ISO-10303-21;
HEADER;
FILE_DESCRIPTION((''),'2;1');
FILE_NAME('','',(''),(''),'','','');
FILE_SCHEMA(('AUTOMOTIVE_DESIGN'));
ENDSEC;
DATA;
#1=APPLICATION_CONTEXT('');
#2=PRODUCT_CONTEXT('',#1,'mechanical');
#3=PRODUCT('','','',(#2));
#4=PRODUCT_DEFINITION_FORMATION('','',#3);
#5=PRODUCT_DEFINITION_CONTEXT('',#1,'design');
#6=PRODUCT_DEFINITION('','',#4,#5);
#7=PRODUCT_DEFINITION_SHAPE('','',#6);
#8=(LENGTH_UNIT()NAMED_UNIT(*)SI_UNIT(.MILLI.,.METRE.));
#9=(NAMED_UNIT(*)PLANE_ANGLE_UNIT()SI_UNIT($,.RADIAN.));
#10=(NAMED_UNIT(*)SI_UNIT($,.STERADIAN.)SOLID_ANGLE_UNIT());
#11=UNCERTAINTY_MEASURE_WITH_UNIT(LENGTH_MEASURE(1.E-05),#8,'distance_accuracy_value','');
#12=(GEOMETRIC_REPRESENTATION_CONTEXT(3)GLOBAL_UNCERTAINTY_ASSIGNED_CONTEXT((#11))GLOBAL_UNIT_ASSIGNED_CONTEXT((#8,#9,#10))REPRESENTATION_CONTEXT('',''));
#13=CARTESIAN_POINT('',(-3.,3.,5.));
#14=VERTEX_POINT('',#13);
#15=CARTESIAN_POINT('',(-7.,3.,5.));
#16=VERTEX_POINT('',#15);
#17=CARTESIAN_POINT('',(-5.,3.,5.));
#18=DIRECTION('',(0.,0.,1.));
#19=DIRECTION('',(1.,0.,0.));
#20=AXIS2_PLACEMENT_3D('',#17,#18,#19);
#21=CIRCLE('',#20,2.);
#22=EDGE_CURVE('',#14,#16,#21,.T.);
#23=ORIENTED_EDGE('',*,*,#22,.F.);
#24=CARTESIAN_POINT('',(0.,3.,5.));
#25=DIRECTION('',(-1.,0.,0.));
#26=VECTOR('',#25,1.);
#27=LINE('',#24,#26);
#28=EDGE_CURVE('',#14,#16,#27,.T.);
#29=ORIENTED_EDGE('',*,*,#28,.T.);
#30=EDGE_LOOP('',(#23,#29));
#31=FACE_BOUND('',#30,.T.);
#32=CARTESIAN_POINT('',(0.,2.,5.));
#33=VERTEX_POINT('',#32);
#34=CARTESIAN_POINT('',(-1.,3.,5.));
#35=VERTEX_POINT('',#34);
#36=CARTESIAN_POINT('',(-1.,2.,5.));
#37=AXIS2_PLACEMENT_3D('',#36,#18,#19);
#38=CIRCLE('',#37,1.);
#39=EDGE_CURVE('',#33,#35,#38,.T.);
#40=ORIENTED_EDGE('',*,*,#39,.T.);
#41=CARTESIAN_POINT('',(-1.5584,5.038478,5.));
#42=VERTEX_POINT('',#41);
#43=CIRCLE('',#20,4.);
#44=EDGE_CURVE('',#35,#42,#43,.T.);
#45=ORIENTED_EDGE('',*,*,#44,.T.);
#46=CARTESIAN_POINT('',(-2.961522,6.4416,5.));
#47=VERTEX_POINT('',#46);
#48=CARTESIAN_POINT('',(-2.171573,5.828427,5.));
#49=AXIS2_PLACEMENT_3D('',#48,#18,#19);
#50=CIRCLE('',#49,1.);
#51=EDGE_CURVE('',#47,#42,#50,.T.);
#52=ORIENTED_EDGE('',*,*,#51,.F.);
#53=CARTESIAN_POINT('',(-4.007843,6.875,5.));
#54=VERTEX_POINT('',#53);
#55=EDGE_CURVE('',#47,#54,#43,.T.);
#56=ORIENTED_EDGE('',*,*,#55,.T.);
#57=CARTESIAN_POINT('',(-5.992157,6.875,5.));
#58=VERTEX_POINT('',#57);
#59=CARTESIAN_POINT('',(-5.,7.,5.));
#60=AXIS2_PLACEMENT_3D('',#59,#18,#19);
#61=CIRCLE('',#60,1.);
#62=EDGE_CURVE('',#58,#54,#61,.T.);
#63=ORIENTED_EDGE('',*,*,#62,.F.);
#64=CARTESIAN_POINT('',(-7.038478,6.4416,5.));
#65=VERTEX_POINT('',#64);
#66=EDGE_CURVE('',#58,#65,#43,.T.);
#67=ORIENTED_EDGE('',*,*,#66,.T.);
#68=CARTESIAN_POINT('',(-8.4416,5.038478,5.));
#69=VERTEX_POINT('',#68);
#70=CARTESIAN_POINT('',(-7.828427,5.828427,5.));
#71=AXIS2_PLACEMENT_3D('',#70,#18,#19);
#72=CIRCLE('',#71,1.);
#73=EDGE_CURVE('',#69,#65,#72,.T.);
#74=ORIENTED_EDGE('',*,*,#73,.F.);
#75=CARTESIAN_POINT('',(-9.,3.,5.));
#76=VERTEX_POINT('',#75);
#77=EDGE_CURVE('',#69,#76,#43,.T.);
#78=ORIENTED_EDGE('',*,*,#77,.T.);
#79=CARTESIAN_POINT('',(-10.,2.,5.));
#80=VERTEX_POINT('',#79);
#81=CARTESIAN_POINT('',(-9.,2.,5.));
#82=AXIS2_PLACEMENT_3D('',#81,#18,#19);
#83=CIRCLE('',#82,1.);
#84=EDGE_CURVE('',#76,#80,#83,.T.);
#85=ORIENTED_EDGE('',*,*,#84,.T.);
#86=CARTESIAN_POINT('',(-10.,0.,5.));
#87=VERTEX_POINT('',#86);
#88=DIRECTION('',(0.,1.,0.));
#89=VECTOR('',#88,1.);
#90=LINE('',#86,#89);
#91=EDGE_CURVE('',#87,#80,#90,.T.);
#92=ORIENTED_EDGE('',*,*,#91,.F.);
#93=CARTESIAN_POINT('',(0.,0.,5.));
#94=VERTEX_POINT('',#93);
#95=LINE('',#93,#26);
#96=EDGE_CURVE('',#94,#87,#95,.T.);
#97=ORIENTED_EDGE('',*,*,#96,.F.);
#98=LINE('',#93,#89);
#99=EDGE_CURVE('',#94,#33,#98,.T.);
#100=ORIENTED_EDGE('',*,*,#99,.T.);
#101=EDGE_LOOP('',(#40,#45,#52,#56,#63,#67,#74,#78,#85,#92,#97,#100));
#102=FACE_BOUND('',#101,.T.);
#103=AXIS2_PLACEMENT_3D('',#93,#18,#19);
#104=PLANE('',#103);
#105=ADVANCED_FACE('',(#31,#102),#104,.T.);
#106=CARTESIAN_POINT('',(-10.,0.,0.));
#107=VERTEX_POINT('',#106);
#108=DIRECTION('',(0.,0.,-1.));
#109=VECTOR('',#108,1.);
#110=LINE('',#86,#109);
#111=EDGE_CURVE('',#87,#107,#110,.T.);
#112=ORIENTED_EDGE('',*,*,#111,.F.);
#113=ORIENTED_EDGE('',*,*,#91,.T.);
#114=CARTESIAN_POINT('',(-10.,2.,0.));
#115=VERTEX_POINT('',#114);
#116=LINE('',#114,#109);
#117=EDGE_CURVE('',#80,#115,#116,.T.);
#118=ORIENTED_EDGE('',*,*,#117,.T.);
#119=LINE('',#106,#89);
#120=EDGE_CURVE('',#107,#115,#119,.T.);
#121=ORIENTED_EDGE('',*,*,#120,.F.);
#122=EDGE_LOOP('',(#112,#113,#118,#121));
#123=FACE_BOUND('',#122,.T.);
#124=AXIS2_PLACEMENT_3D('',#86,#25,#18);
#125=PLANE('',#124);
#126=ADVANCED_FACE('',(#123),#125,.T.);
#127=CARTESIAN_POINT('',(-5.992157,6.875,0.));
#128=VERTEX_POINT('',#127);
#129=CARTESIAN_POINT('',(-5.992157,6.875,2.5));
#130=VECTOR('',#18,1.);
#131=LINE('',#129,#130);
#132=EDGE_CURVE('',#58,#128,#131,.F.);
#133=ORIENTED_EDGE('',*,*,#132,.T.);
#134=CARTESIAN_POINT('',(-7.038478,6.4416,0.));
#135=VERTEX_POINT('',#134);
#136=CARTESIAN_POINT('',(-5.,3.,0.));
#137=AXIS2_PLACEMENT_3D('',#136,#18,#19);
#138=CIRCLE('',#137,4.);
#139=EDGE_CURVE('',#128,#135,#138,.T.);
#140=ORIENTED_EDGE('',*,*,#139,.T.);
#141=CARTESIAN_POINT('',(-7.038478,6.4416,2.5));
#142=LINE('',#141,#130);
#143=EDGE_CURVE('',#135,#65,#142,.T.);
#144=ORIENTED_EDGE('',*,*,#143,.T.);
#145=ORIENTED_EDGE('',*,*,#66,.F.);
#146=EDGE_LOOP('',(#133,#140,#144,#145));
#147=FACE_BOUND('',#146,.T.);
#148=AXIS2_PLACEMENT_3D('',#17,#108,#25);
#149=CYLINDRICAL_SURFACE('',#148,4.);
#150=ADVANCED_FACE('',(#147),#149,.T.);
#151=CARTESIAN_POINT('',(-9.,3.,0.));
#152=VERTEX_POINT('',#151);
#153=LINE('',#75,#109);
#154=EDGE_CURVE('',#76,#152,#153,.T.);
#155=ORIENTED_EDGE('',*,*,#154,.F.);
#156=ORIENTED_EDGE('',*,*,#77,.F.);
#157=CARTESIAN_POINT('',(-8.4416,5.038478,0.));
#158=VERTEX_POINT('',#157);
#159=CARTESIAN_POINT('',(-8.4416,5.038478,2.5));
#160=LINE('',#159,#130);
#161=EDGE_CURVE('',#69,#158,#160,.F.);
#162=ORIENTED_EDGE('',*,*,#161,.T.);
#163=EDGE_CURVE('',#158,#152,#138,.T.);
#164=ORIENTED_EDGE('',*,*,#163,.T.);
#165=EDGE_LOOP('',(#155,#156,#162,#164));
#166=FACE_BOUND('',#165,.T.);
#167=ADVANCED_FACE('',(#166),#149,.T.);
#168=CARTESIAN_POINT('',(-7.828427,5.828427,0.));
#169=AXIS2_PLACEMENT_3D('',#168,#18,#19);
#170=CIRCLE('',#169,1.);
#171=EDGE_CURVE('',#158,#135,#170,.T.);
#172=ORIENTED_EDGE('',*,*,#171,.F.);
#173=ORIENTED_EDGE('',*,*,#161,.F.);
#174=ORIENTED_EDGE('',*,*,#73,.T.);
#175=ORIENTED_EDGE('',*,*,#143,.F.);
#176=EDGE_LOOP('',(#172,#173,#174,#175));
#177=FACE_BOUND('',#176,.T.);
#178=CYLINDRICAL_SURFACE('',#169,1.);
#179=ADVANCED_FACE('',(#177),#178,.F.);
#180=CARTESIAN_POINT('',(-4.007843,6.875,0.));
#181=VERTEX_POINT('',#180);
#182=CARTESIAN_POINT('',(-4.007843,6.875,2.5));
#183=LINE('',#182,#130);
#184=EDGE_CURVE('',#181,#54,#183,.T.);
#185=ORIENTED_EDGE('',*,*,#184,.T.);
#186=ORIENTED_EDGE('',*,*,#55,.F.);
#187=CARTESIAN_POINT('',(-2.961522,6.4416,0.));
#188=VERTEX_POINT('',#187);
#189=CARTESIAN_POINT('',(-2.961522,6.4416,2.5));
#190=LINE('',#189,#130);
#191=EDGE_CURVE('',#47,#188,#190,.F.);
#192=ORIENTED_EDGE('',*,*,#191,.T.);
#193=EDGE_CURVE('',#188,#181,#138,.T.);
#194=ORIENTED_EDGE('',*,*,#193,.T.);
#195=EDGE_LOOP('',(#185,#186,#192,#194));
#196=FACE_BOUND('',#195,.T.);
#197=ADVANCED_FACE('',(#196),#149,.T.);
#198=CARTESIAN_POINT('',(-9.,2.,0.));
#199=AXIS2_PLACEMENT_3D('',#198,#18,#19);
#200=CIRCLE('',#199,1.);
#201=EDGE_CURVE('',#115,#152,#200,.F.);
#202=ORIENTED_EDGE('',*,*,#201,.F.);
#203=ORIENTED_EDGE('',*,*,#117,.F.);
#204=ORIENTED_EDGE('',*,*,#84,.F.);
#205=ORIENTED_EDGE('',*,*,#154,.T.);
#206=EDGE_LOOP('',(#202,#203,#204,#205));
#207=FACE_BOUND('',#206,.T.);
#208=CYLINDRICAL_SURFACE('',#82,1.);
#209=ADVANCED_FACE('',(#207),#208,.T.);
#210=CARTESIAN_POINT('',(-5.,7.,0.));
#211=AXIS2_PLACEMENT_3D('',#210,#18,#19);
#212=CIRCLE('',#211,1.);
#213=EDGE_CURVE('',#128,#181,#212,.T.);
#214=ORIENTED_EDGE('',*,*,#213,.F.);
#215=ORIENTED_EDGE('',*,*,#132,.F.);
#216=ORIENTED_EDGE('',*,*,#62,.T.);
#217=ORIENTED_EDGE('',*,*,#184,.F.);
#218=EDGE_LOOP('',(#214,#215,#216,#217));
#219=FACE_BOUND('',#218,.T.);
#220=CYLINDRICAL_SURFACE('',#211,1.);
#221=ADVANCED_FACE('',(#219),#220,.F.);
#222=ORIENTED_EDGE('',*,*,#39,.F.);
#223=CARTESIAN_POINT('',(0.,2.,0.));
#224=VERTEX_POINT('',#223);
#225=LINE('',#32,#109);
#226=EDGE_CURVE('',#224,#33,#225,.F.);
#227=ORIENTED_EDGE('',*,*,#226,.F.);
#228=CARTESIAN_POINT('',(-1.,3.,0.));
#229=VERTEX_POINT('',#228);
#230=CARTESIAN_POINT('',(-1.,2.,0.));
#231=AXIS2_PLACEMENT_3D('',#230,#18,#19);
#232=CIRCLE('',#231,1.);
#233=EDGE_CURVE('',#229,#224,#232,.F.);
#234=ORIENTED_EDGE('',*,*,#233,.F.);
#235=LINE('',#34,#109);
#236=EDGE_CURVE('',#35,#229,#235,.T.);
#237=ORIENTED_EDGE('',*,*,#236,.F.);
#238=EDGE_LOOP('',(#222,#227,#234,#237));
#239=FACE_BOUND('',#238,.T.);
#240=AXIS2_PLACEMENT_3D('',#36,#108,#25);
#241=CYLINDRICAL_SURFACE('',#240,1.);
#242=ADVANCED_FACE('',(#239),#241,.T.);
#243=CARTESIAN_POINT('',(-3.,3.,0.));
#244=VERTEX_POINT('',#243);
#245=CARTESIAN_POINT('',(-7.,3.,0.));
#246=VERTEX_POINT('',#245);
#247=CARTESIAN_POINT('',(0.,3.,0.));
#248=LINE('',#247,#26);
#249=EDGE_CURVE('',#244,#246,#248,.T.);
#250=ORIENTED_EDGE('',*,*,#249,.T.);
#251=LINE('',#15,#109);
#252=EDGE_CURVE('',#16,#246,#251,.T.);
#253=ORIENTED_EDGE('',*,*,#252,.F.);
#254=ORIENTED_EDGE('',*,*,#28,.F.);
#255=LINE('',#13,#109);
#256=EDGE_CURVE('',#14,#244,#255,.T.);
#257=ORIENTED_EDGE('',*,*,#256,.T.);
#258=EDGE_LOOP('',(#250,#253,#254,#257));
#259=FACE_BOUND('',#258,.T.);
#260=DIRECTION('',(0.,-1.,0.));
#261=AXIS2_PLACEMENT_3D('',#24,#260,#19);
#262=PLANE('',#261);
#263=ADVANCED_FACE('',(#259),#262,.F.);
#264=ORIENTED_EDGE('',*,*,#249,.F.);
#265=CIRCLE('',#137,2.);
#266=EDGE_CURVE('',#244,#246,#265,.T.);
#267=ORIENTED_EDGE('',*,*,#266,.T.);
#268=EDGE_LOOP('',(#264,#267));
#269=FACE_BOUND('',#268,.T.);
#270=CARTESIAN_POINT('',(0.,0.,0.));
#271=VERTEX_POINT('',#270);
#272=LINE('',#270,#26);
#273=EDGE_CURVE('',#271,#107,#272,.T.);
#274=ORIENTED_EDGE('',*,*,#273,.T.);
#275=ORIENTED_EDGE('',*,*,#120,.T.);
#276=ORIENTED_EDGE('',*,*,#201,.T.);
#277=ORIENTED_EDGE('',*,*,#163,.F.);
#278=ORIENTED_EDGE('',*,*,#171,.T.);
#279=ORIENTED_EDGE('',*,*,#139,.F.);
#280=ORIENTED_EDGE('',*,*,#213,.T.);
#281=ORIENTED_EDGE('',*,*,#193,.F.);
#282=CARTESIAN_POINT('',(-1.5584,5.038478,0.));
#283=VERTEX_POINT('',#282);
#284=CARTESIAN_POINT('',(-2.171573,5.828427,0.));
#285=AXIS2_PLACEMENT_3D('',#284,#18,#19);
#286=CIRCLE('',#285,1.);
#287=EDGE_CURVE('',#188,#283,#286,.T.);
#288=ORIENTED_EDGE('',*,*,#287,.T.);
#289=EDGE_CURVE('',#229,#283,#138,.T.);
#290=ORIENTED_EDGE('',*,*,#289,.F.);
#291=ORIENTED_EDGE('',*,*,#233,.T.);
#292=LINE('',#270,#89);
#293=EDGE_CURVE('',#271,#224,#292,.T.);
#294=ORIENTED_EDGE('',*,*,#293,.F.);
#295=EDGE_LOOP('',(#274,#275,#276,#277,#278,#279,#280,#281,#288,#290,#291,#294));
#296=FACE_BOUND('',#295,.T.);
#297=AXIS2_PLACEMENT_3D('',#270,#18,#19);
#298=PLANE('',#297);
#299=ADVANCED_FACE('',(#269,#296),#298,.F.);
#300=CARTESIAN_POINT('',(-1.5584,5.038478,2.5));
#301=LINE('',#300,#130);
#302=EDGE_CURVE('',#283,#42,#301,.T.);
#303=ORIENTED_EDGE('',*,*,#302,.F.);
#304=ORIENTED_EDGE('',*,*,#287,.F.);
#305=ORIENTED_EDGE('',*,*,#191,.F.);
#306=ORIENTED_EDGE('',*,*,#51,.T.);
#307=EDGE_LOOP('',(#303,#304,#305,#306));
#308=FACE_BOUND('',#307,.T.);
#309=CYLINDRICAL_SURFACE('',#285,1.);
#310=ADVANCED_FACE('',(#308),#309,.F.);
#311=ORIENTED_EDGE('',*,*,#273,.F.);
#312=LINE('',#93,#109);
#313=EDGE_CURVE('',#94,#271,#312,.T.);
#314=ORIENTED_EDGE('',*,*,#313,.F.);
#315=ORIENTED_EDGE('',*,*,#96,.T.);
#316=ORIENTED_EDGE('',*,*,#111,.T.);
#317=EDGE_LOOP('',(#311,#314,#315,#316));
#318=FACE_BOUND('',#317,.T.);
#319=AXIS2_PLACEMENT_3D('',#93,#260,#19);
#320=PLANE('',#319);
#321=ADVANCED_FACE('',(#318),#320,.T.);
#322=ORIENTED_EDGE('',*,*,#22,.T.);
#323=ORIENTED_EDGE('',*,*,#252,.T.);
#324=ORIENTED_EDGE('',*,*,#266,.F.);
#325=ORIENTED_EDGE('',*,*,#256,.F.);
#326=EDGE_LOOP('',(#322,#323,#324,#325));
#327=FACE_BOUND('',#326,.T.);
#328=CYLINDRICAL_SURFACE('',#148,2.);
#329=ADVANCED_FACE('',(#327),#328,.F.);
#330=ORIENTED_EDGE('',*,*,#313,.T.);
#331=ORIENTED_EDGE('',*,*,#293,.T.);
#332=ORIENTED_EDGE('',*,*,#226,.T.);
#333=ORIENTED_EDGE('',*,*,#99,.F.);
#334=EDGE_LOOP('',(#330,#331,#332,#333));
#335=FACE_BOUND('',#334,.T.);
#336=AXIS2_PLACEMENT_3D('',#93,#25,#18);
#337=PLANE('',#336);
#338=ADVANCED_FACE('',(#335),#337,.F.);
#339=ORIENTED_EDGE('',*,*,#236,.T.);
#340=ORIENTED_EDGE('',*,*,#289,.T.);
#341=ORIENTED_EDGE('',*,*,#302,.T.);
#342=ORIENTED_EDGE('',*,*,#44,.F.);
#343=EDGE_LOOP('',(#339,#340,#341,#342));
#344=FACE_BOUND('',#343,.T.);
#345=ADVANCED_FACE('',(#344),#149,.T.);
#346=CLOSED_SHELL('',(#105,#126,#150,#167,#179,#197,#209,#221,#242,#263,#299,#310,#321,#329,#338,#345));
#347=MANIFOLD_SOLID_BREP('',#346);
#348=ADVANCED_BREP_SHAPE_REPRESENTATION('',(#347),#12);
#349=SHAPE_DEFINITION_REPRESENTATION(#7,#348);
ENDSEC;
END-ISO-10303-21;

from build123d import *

# Parameters (mm, degrees)
BOSS_EXTRUDE1_DEPTH = 5
SKETCH2_R           = 1
CUT_EXTRUDE1_DEPTH  = 5
FILLET1_R           = 1


with BuildPart() as part:
    # Sketch1 → Boss-Extrude1 (new body)
    with BuildSketch(Plane.XY):
        with BuildLine():
            Line((0, 0), (0, 3))
            Line((0, 3), (-1, 3))
            ThreePointArc((-1, 3), (-5, 7), (-9, 3))
            Line((-9, 3), (-10, 3))
            Line((-10, 3), (-10, 0))
            Line((-10, 0), (0, 0))
        make_face()
        with BuildLine():
            ThreePointArc((-7, 3), (-5, 5), (-3, 3))
            Line((-3, 3), (-7, 3))
        make_face(mode=Mode.SUBTRACT)
    extrude(amount=BOSS_EXTRUDE1_DEPTH)

    # Sketch2 → Cut-Extrude1 (cut)
    with BuildSketch(Plane.XY.offset(5)):
        with Locations((-5, 7)):
            Circle(SKETCH2_R)
        with Locations((-2.171572875, 5.828427125)):
            Circle(SKETCH2_R)
        with Locations((-7.828427125, 5.828427125)):
            Circle(SKETCH2_R)
    extrude(amount=-CUT_EXTRUDE1_DEPTH, mode=Mode.SUBTRACT)

    # Fillet1
    fillet1_edges = [part.edges().sort_by_distance(p)[0] for p in [
        (0, 3, 2.5),
        (-10, 3, 2.5),
    ]]
    fillet(fillet1_edges, radius=FILLET1_R - 0.0001)  # a hair under: the kernel refuses the full size


solid = part.part
